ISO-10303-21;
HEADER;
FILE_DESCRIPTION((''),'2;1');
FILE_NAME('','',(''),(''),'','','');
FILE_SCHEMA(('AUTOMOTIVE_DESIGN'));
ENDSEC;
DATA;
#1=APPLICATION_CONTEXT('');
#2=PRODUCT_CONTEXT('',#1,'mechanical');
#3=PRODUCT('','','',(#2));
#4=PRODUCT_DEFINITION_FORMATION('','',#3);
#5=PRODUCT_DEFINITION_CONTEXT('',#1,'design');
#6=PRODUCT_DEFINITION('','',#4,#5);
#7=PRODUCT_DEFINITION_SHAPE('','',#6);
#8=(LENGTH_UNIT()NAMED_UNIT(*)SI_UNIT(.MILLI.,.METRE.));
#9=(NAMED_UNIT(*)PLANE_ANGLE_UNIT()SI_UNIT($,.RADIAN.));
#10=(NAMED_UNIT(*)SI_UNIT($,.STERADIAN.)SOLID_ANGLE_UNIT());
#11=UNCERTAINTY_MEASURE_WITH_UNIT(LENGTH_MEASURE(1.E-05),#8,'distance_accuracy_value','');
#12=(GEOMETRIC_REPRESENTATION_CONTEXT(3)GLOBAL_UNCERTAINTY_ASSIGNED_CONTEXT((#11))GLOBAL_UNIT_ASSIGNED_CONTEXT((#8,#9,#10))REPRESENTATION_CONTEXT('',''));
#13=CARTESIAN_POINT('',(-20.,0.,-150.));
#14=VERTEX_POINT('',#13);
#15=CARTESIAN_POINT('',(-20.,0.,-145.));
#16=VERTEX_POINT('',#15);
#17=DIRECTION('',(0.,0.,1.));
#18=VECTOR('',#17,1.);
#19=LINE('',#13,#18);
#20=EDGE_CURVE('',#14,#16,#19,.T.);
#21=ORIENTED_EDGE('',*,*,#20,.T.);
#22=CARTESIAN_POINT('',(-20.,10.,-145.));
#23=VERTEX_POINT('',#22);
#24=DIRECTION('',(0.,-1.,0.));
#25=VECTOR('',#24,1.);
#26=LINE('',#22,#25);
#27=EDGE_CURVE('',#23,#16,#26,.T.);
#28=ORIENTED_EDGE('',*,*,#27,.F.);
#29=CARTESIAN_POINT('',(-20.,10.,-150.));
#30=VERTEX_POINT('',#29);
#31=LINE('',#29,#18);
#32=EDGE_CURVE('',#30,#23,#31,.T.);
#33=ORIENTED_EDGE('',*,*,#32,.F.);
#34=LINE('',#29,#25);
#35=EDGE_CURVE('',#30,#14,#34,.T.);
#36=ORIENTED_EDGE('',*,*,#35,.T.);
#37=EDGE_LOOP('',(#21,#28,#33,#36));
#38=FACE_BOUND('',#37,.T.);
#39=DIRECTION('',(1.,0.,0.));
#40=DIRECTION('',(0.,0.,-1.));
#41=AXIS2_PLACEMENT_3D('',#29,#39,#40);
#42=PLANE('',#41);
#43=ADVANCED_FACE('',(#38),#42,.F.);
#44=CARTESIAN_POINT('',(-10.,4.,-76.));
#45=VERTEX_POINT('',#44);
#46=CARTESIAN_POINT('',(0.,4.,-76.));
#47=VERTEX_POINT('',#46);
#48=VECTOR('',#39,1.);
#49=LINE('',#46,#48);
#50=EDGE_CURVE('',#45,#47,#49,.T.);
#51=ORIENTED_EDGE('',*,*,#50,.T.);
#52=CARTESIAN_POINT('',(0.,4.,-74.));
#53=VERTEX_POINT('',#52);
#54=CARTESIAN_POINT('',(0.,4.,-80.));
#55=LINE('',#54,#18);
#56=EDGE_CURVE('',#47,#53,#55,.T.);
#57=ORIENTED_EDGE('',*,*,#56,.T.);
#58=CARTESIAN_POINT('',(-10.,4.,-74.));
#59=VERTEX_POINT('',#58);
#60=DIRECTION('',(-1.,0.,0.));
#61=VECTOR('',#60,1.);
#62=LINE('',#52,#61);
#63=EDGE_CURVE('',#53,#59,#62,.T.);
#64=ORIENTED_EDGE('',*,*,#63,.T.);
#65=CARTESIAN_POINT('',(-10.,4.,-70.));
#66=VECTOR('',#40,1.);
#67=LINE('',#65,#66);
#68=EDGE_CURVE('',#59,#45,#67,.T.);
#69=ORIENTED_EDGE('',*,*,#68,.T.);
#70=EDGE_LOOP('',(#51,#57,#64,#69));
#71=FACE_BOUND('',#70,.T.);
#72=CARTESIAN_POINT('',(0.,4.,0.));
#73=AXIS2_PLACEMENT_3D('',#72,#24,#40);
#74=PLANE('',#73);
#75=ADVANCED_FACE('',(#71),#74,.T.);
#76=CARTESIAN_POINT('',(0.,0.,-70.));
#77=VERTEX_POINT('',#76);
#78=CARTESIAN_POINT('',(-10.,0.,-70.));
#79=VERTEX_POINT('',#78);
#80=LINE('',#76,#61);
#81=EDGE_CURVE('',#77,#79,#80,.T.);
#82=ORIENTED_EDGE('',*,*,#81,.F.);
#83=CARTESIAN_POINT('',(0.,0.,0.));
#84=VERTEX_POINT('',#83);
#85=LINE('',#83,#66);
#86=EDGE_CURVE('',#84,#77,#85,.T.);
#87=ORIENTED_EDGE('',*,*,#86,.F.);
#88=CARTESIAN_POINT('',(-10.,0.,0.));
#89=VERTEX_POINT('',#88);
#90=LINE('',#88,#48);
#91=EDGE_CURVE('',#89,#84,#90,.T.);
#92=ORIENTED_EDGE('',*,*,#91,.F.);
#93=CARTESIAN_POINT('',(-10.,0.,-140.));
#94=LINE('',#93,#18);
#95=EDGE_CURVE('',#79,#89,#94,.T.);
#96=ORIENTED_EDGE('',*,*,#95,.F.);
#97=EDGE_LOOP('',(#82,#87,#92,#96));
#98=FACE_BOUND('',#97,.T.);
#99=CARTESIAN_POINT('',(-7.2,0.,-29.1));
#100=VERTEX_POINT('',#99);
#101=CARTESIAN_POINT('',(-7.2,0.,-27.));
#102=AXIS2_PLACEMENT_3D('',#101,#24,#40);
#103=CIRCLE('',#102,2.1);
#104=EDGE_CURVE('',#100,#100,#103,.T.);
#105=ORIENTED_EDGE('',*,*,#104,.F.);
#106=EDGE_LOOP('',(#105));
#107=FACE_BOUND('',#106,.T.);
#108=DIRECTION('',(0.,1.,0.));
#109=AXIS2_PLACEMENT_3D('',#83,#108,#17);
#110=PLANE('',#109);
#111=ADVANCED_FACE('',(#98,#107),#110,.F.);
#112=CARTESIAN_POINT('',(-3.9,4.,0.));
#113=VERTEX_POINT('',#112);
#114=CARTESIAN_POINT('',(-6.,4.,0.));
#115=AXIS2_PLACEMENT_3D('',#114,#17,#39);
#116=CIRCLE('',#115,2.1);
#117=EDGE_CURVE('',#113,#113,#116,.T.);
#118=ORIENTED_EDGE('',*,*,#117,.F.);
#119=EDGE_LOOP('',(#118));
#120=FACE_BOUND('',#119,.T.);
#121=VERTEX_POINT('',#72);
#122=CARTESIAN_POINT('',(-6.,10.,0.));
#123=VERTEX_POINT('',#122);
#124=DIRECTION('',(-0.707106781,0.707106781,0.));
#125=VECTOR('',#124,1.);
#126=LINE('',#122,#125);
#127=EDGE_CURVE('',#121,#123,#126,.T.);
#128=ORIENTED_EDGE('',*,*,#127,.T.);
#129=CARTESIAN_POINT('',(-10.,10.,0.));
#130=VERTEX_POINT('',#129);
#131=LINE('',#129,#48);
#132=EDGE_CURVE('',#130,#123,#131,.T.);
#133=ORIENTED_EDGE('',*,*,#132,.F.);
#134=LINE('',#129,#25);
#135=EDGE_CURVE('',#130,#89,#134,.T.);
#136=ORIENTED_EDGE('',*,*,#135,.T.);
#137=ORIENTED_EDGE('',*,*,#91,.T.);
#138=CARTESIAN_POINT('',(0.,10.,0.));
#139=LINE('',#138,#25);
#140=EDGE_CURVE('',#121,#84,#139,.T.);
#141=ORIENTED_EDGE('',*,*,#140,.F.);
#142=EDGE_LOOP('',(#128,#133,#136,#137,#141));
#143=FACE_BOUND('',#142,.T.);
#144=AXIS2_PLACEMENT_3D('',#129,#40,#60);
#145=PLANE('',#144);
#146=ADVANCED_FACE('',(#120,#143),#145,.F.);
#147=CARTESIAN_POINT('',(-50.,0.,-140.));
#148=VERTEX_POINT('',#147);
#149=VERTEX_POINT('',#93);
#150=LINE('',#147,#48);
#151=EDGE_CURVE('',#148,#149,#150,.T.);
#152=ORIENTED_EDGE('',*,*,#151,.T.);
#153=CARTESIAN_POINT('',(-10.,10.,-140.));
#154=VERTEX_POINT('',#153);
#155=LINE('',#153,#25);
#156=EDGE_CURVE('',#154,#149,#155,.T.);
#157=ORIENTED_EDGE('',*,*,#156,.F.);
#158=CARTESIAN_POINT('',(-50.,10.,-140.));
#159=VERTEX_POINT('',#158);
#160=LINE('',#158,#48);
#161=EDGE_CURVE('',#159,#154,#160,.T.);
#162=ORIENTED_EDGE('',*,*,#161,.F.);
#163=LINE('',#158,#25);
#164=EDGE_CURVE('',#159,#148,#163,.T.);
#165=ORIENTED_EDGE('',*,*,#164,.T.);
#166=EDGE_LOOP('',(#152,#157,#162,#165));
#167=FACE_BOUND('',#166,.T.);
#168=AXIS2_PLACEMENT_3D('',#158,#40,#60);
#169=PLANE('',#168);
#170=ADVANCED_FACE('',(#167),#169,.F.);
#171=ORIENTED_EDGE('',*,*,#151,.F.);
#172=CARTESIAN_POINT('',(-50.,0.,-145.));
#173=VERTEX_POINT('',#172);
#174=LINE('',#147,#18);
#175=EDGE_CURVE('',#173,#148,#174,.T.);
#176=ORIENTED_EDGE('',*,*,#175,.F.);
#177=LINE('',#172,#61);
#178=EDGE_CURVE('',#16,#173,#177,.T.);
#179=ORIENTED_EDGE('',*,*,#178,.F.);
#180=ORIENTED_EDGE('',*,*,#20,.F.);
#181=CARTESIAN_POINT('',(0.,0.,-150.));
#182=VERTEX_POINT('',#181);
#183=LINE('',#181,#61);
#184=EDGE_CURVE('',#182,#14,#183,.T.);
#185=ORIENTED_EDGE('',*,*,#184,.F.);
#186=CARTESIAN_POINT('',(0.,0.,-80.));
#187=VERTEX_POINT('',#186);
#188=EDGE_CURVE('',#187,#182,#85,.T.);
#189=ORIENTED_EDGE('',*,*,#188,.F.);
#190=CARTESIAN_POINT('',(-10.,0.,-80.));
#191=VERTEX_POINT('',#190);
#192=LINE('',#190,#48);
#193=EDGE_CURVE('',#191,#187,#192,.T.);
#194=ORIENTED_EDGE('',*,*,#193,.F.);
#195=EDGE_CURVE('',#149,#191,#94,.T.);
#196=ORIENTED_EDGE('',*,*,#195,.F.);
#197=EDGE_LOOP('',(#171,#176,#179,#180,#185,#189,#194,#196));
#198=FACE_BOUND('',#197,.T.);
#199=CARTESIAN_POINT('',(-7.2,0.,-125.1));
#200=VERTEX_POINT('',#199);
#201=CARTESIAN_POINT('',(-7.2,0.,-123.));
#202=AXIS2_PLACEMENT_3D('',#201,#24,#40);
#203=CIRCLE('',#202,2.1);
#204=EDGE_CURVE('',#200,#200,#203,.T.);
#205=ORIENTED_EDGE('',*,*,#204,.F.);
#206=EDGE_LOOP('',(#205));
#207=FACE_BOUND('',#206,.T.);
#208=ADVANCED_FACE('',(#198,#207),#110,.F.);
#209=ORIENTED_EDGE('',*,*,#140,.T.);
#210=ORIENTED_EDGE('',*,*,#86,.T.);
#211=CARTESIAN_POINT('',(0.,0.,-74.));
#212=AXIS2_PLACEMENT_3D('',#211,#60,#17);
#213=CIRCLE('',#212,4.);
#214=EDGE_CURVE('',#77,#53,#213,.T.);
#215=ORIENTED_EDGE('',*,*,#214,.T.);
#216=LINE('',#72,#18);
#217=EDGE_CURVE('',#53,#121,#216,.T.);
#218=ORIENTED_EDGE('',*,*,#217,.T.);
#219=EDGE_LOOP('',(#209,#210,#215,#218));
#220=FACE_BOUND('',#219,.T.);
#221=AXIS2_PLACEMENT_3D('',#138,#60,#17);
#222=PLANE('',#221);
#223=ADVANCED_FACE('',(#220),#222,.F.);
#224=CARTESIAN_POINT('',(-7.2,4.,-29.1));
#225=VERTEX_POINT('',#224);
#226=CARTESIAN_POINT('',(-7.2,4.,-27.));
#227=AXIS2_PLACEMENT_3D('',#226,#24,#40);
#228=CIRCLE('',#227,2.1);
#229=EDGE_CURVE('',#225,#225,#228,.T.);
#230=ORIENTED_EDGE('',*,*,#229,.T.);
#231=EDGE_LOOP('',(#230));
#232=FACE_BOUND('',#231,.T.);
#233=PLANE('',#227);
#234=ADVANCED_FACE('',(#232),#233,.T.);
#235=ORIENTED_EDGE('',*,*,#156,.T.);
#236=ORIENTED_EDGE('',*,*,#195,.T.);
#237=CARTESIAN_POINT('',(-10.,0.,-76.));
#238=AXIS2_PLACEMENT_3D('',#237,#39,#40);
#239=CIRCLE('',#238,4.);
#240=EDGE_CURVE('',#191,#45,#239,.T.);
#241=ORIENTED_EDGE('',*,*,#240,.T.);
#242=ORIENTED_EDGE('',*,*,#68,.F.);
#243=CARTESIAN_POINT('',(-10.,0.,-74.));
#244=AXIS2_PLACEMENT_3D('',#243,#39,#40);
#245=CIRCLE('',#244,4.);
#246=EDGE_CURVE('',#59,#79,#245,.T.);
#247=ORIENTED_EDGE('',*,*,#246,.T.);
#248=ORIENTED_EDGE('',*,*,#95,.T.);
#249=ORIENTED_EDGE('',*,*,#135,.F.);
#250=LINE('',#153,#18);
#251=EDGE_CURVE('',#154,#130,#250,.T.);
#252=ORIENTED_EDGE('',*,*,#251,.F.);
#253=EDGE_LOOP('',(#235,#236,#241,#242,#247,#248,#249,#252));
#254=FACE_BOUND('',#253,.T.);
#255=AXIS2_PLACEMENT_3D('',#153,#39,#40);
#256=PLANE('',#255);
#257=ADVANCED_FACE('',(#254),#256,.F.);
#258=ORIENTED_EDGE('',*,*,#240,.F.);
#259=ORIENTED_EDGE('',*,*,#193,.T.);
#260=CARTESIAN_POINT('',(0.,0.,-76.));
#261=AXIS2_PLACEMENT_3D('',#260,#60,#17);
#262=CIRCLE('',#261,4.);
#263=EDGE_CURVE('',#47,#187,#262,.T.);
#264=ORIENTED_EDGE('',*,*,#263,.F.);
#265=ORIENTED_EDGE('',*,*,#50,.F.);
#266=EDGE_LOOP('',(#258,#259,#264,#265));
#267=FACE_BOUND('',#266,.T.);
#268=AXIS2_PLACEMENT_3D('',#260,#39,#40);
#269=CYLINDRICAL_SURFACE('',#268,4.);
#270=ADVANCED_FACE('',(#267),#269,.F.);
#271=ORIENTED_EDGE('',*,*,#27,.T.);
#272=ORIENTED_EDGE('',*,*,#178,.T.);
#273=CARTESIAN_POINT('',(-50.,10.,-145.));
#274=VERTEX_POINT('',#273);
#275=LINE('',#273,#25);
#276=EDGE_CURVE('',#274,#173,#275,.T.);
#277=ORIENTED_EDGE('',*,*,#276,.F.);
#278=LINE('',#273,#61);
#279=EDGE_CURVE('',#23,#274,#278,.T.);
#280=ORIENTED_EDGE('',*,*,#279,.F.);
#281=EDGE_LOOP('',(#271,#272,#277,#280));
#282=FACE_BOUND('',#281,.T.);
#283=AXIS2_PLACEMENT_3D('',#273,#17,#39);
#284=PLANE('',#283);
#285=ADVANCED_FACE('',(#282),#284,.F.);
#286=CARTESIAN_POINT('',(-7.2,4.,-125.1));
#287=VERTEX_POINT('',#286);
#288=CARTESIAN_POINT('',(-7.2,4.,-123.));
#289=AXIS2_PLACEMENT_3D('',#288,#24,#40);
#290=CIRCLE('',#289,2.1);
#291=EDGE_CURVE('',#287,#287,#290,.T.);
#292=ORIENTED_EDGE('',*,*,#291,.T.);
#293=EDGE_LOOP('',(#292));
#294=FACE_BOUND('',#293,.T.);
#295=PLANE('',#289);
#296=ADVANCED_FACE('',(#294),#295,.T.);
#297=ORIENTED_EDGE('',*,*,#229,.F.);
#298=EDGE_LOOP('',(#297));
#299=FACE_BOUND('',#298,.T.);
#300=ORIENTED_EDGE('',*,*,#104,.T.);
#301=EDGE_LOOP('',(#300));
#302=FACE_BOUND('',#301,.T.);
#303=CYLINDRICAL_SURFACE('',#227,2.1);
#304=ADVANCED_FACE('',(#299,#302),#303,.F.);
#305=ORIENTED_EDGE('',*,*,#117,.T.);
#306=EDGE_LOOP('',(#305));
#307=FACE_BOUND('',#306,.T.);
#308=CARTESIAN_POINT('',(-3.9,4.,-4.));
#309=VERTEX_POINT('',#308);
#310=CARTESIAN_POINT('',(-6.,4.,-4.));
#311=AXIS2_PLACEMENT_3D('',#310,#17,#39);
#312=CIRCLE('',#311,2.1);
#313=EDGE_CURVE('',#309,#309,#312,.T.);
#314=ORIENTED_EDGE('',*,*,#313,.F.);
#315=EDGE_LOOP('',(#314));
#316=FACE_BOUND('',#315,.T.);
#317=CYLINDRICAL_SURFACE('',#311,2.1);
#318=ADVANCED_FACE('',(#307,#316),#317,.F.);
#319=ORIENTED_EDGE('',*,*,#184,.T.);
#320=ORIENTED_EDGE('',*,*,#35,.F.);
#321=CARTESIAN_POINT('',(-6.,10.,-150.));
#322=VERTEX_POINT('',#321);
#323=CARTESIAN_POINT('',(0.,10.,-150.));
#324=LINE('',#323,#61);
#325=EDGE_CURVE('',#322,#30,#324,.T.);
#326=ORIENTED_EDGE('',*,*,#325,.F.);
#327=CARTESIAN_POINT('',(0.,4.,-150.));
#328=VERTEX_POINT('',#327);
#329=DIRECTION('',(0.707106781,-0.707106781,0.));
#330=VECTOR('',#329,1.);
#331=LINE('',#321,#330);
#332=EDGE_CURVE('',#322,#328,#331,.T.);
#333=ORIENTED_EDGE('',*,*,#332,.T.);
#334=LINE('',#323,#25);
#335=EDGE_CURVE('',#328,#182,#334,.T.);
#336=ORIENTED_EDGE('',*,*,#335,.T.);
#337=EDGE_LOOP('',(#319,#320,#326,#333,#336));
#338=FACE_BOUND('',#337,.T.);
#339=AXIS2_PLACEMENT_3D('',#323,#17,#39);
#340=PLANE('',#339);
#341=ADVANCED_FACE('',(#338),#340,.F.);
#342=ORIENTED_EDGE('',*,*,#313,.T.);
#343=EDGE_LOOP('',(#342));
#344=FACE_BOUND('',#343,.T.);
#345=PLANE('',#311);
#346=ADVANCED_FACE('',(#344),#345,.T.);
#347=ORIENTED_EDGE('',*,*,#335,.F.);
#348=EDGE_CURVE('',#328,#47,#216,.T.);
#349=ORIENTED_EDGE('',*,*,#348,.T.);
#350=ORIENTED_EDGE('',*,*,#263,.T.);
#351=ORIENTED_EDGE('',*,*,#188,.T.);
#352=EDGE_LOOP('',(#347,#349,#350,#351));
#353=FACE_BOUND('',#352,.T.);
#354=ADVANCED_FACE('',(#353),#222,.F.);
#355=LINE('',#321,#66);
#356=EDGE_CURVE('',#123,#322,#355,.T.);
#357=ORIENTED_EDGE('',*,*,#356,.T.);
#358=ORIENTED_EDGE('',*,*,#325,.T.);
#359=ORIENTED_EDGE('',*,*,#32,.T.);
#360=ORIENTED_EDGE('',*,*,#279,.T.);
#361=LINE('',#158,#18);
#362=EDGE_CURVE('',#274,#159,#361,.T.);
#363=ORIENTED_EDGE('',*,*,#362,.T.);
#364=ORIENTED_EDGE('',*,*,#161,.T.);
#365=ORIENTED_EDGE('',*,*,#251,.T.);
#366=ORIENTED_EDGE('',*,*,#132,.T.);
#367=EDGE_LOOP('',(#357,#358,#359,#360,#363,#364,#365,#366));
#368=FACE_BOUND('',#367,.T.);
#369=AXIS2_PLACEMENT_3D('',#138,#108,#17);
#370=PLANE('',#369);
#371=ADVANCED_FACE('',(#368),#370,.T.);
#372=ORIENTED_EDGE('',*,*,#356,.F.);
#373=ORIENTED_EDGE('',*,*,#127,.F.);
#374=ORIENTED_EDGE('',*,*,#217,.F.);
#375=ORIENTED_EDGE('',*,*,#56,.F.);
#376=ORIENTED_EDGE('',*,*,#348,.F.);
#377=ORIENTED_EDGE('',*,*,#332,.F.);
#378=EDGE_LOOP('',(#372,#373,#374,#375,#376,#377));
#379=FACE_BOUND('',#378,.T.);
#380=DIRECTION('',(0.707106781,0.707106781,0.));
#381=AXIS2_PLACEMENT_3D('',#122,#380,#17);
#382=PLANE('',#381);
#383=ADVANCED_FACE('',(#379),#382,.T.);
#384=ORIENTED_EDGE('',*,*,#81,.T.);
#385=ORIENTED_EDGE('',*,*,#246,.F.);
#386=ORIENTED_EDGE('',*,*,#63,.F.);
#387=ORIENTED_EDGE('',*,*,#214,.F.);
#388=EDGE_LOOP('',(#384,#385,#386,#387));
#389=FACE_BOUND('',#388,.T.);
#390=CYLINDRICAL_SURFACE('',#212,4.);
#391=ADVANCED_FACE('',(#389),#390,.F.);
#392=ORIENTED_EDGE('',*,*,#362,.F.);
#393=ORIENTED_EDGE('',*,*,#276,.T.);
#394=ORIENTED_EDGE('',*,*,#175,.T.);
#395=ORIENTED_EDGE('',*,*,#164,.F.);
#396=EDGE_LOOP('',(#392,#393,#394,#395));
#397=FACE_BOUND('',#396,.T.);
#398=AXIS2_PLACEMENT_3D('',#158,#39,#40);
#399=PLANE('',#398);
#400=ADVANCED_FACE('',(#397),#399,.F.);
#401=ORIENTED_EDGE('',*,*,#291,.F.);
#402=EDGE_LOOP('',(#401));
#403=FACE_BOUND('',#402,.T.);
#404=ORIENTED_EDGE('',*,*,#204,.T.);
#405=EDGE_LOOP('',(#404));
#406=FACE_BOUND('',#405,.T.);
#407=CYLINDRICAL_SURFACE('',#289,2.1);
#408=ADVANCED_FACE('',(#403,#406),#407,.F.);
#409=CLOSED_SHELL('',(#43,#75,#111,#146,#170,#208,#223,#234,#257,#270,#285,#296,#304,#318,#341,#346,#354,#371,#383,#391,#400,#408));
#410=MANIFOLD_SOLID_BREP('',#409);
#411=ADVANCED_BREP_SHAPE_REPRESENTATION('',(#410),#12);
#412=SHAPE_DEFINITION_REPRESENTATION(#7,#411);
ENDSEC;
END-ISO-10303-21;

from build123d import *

# Parameters (mm, degrees)
DODANIE_WYCI_GNI_CIE1_DEPTH = 10
SZKIC2_R                    = 2.1
WYTNIJ_WYCI_GNI_CIE1_DEPTH  = 4
SZKIC3_R                    = 2.1
WYTNIJ_WYCI_GNI_CIE2_DEPTH  = 4
SFAZOWANIE1_SIZE            = 6
SZKIC4_W                    = 10
SZKIC4_H                    = 10
WYTNIJ_WYCI_GNI_CIE3_DEPTH  = 4
ZAOKR_GLENIE1_R             = 4


with BuildPart() as part:
    # Szkic1 → Dodanie-wyciągnięcie1 (new body)
    with BuildSketch(Plane(origin=(0, 0, 0), x_dir=(1, 0, 0), z_dir=(0, 1, 0))):
        Polygon((0, 0), (0, 150), (-20, 150), (-20, 145), (-50, 145), (-50, 140), (-10, 140), (-10, 0), align=None)
    extrude(amount=DODANIE_WYCI_GNI_CIE1_DEPTH)

    # Szkic2 → Wytnij-wyciągnięcie1 (cut)
    with BuildSketch(Plane.XZ):
        with Locations(Location((-7.2, -123, 0), (0, 0, 270))):
            Circle(SZKIC2_R)
        with Locations(Location((-7.2, -27, 0), (0, 0, 270))):
            Circle(SZKIC2_R)
    extrude(amount=-WYTNIJ_WYCI_GNI_CIE1_DEPTH, mode=Mode.SUBTRACT)

    # Szkic3 → Wytnij-wyciągnięcie2 (cut)
    with BuildSketch(Plane.XY):
        with Locations((-6, 4)):
            Circle(SZKIC3_R)
    extrude(amount=-WYTNIJ_WYCI_GNI_CIE2_DEPTH, mode=Mode.SUBTRACT)

    # Sfazowanie1
    sfazowanie1_edges = [part.edges().sort_by_distance(p)[0] for p in [
        (0, 10, -75),
    ]]
    chamfer(sfazowanie1_edges, length=SFAZOWANIE1_SIZE)

    # Szkic4 → Wytnij-wyciągnięcie3 (cut)
    with BuildSketch(Plane.XZ):
        with Locations((-5, -75)):
            Rectangle(SZKIC4_W, SZKIC4_H)
    extrude(amount=-WYTNIJ_WYCI_GNI_CIE3_DEPTH, mode=Mode.SUBTRACT)

    # Zaokrąglenie1
    zaokr_glenie1_edges = [part.edges().sort_by_distance(p)[0] for p in [
        (-5, 4, -80),
        (-5, 4, -70),
    ]]
    fillet(zaokr_glenie1_edges, radius=ZAOKR_GLENIE1_R - 0.0001)  # a hair under: the kernel refuses the full size


solid = part.part
